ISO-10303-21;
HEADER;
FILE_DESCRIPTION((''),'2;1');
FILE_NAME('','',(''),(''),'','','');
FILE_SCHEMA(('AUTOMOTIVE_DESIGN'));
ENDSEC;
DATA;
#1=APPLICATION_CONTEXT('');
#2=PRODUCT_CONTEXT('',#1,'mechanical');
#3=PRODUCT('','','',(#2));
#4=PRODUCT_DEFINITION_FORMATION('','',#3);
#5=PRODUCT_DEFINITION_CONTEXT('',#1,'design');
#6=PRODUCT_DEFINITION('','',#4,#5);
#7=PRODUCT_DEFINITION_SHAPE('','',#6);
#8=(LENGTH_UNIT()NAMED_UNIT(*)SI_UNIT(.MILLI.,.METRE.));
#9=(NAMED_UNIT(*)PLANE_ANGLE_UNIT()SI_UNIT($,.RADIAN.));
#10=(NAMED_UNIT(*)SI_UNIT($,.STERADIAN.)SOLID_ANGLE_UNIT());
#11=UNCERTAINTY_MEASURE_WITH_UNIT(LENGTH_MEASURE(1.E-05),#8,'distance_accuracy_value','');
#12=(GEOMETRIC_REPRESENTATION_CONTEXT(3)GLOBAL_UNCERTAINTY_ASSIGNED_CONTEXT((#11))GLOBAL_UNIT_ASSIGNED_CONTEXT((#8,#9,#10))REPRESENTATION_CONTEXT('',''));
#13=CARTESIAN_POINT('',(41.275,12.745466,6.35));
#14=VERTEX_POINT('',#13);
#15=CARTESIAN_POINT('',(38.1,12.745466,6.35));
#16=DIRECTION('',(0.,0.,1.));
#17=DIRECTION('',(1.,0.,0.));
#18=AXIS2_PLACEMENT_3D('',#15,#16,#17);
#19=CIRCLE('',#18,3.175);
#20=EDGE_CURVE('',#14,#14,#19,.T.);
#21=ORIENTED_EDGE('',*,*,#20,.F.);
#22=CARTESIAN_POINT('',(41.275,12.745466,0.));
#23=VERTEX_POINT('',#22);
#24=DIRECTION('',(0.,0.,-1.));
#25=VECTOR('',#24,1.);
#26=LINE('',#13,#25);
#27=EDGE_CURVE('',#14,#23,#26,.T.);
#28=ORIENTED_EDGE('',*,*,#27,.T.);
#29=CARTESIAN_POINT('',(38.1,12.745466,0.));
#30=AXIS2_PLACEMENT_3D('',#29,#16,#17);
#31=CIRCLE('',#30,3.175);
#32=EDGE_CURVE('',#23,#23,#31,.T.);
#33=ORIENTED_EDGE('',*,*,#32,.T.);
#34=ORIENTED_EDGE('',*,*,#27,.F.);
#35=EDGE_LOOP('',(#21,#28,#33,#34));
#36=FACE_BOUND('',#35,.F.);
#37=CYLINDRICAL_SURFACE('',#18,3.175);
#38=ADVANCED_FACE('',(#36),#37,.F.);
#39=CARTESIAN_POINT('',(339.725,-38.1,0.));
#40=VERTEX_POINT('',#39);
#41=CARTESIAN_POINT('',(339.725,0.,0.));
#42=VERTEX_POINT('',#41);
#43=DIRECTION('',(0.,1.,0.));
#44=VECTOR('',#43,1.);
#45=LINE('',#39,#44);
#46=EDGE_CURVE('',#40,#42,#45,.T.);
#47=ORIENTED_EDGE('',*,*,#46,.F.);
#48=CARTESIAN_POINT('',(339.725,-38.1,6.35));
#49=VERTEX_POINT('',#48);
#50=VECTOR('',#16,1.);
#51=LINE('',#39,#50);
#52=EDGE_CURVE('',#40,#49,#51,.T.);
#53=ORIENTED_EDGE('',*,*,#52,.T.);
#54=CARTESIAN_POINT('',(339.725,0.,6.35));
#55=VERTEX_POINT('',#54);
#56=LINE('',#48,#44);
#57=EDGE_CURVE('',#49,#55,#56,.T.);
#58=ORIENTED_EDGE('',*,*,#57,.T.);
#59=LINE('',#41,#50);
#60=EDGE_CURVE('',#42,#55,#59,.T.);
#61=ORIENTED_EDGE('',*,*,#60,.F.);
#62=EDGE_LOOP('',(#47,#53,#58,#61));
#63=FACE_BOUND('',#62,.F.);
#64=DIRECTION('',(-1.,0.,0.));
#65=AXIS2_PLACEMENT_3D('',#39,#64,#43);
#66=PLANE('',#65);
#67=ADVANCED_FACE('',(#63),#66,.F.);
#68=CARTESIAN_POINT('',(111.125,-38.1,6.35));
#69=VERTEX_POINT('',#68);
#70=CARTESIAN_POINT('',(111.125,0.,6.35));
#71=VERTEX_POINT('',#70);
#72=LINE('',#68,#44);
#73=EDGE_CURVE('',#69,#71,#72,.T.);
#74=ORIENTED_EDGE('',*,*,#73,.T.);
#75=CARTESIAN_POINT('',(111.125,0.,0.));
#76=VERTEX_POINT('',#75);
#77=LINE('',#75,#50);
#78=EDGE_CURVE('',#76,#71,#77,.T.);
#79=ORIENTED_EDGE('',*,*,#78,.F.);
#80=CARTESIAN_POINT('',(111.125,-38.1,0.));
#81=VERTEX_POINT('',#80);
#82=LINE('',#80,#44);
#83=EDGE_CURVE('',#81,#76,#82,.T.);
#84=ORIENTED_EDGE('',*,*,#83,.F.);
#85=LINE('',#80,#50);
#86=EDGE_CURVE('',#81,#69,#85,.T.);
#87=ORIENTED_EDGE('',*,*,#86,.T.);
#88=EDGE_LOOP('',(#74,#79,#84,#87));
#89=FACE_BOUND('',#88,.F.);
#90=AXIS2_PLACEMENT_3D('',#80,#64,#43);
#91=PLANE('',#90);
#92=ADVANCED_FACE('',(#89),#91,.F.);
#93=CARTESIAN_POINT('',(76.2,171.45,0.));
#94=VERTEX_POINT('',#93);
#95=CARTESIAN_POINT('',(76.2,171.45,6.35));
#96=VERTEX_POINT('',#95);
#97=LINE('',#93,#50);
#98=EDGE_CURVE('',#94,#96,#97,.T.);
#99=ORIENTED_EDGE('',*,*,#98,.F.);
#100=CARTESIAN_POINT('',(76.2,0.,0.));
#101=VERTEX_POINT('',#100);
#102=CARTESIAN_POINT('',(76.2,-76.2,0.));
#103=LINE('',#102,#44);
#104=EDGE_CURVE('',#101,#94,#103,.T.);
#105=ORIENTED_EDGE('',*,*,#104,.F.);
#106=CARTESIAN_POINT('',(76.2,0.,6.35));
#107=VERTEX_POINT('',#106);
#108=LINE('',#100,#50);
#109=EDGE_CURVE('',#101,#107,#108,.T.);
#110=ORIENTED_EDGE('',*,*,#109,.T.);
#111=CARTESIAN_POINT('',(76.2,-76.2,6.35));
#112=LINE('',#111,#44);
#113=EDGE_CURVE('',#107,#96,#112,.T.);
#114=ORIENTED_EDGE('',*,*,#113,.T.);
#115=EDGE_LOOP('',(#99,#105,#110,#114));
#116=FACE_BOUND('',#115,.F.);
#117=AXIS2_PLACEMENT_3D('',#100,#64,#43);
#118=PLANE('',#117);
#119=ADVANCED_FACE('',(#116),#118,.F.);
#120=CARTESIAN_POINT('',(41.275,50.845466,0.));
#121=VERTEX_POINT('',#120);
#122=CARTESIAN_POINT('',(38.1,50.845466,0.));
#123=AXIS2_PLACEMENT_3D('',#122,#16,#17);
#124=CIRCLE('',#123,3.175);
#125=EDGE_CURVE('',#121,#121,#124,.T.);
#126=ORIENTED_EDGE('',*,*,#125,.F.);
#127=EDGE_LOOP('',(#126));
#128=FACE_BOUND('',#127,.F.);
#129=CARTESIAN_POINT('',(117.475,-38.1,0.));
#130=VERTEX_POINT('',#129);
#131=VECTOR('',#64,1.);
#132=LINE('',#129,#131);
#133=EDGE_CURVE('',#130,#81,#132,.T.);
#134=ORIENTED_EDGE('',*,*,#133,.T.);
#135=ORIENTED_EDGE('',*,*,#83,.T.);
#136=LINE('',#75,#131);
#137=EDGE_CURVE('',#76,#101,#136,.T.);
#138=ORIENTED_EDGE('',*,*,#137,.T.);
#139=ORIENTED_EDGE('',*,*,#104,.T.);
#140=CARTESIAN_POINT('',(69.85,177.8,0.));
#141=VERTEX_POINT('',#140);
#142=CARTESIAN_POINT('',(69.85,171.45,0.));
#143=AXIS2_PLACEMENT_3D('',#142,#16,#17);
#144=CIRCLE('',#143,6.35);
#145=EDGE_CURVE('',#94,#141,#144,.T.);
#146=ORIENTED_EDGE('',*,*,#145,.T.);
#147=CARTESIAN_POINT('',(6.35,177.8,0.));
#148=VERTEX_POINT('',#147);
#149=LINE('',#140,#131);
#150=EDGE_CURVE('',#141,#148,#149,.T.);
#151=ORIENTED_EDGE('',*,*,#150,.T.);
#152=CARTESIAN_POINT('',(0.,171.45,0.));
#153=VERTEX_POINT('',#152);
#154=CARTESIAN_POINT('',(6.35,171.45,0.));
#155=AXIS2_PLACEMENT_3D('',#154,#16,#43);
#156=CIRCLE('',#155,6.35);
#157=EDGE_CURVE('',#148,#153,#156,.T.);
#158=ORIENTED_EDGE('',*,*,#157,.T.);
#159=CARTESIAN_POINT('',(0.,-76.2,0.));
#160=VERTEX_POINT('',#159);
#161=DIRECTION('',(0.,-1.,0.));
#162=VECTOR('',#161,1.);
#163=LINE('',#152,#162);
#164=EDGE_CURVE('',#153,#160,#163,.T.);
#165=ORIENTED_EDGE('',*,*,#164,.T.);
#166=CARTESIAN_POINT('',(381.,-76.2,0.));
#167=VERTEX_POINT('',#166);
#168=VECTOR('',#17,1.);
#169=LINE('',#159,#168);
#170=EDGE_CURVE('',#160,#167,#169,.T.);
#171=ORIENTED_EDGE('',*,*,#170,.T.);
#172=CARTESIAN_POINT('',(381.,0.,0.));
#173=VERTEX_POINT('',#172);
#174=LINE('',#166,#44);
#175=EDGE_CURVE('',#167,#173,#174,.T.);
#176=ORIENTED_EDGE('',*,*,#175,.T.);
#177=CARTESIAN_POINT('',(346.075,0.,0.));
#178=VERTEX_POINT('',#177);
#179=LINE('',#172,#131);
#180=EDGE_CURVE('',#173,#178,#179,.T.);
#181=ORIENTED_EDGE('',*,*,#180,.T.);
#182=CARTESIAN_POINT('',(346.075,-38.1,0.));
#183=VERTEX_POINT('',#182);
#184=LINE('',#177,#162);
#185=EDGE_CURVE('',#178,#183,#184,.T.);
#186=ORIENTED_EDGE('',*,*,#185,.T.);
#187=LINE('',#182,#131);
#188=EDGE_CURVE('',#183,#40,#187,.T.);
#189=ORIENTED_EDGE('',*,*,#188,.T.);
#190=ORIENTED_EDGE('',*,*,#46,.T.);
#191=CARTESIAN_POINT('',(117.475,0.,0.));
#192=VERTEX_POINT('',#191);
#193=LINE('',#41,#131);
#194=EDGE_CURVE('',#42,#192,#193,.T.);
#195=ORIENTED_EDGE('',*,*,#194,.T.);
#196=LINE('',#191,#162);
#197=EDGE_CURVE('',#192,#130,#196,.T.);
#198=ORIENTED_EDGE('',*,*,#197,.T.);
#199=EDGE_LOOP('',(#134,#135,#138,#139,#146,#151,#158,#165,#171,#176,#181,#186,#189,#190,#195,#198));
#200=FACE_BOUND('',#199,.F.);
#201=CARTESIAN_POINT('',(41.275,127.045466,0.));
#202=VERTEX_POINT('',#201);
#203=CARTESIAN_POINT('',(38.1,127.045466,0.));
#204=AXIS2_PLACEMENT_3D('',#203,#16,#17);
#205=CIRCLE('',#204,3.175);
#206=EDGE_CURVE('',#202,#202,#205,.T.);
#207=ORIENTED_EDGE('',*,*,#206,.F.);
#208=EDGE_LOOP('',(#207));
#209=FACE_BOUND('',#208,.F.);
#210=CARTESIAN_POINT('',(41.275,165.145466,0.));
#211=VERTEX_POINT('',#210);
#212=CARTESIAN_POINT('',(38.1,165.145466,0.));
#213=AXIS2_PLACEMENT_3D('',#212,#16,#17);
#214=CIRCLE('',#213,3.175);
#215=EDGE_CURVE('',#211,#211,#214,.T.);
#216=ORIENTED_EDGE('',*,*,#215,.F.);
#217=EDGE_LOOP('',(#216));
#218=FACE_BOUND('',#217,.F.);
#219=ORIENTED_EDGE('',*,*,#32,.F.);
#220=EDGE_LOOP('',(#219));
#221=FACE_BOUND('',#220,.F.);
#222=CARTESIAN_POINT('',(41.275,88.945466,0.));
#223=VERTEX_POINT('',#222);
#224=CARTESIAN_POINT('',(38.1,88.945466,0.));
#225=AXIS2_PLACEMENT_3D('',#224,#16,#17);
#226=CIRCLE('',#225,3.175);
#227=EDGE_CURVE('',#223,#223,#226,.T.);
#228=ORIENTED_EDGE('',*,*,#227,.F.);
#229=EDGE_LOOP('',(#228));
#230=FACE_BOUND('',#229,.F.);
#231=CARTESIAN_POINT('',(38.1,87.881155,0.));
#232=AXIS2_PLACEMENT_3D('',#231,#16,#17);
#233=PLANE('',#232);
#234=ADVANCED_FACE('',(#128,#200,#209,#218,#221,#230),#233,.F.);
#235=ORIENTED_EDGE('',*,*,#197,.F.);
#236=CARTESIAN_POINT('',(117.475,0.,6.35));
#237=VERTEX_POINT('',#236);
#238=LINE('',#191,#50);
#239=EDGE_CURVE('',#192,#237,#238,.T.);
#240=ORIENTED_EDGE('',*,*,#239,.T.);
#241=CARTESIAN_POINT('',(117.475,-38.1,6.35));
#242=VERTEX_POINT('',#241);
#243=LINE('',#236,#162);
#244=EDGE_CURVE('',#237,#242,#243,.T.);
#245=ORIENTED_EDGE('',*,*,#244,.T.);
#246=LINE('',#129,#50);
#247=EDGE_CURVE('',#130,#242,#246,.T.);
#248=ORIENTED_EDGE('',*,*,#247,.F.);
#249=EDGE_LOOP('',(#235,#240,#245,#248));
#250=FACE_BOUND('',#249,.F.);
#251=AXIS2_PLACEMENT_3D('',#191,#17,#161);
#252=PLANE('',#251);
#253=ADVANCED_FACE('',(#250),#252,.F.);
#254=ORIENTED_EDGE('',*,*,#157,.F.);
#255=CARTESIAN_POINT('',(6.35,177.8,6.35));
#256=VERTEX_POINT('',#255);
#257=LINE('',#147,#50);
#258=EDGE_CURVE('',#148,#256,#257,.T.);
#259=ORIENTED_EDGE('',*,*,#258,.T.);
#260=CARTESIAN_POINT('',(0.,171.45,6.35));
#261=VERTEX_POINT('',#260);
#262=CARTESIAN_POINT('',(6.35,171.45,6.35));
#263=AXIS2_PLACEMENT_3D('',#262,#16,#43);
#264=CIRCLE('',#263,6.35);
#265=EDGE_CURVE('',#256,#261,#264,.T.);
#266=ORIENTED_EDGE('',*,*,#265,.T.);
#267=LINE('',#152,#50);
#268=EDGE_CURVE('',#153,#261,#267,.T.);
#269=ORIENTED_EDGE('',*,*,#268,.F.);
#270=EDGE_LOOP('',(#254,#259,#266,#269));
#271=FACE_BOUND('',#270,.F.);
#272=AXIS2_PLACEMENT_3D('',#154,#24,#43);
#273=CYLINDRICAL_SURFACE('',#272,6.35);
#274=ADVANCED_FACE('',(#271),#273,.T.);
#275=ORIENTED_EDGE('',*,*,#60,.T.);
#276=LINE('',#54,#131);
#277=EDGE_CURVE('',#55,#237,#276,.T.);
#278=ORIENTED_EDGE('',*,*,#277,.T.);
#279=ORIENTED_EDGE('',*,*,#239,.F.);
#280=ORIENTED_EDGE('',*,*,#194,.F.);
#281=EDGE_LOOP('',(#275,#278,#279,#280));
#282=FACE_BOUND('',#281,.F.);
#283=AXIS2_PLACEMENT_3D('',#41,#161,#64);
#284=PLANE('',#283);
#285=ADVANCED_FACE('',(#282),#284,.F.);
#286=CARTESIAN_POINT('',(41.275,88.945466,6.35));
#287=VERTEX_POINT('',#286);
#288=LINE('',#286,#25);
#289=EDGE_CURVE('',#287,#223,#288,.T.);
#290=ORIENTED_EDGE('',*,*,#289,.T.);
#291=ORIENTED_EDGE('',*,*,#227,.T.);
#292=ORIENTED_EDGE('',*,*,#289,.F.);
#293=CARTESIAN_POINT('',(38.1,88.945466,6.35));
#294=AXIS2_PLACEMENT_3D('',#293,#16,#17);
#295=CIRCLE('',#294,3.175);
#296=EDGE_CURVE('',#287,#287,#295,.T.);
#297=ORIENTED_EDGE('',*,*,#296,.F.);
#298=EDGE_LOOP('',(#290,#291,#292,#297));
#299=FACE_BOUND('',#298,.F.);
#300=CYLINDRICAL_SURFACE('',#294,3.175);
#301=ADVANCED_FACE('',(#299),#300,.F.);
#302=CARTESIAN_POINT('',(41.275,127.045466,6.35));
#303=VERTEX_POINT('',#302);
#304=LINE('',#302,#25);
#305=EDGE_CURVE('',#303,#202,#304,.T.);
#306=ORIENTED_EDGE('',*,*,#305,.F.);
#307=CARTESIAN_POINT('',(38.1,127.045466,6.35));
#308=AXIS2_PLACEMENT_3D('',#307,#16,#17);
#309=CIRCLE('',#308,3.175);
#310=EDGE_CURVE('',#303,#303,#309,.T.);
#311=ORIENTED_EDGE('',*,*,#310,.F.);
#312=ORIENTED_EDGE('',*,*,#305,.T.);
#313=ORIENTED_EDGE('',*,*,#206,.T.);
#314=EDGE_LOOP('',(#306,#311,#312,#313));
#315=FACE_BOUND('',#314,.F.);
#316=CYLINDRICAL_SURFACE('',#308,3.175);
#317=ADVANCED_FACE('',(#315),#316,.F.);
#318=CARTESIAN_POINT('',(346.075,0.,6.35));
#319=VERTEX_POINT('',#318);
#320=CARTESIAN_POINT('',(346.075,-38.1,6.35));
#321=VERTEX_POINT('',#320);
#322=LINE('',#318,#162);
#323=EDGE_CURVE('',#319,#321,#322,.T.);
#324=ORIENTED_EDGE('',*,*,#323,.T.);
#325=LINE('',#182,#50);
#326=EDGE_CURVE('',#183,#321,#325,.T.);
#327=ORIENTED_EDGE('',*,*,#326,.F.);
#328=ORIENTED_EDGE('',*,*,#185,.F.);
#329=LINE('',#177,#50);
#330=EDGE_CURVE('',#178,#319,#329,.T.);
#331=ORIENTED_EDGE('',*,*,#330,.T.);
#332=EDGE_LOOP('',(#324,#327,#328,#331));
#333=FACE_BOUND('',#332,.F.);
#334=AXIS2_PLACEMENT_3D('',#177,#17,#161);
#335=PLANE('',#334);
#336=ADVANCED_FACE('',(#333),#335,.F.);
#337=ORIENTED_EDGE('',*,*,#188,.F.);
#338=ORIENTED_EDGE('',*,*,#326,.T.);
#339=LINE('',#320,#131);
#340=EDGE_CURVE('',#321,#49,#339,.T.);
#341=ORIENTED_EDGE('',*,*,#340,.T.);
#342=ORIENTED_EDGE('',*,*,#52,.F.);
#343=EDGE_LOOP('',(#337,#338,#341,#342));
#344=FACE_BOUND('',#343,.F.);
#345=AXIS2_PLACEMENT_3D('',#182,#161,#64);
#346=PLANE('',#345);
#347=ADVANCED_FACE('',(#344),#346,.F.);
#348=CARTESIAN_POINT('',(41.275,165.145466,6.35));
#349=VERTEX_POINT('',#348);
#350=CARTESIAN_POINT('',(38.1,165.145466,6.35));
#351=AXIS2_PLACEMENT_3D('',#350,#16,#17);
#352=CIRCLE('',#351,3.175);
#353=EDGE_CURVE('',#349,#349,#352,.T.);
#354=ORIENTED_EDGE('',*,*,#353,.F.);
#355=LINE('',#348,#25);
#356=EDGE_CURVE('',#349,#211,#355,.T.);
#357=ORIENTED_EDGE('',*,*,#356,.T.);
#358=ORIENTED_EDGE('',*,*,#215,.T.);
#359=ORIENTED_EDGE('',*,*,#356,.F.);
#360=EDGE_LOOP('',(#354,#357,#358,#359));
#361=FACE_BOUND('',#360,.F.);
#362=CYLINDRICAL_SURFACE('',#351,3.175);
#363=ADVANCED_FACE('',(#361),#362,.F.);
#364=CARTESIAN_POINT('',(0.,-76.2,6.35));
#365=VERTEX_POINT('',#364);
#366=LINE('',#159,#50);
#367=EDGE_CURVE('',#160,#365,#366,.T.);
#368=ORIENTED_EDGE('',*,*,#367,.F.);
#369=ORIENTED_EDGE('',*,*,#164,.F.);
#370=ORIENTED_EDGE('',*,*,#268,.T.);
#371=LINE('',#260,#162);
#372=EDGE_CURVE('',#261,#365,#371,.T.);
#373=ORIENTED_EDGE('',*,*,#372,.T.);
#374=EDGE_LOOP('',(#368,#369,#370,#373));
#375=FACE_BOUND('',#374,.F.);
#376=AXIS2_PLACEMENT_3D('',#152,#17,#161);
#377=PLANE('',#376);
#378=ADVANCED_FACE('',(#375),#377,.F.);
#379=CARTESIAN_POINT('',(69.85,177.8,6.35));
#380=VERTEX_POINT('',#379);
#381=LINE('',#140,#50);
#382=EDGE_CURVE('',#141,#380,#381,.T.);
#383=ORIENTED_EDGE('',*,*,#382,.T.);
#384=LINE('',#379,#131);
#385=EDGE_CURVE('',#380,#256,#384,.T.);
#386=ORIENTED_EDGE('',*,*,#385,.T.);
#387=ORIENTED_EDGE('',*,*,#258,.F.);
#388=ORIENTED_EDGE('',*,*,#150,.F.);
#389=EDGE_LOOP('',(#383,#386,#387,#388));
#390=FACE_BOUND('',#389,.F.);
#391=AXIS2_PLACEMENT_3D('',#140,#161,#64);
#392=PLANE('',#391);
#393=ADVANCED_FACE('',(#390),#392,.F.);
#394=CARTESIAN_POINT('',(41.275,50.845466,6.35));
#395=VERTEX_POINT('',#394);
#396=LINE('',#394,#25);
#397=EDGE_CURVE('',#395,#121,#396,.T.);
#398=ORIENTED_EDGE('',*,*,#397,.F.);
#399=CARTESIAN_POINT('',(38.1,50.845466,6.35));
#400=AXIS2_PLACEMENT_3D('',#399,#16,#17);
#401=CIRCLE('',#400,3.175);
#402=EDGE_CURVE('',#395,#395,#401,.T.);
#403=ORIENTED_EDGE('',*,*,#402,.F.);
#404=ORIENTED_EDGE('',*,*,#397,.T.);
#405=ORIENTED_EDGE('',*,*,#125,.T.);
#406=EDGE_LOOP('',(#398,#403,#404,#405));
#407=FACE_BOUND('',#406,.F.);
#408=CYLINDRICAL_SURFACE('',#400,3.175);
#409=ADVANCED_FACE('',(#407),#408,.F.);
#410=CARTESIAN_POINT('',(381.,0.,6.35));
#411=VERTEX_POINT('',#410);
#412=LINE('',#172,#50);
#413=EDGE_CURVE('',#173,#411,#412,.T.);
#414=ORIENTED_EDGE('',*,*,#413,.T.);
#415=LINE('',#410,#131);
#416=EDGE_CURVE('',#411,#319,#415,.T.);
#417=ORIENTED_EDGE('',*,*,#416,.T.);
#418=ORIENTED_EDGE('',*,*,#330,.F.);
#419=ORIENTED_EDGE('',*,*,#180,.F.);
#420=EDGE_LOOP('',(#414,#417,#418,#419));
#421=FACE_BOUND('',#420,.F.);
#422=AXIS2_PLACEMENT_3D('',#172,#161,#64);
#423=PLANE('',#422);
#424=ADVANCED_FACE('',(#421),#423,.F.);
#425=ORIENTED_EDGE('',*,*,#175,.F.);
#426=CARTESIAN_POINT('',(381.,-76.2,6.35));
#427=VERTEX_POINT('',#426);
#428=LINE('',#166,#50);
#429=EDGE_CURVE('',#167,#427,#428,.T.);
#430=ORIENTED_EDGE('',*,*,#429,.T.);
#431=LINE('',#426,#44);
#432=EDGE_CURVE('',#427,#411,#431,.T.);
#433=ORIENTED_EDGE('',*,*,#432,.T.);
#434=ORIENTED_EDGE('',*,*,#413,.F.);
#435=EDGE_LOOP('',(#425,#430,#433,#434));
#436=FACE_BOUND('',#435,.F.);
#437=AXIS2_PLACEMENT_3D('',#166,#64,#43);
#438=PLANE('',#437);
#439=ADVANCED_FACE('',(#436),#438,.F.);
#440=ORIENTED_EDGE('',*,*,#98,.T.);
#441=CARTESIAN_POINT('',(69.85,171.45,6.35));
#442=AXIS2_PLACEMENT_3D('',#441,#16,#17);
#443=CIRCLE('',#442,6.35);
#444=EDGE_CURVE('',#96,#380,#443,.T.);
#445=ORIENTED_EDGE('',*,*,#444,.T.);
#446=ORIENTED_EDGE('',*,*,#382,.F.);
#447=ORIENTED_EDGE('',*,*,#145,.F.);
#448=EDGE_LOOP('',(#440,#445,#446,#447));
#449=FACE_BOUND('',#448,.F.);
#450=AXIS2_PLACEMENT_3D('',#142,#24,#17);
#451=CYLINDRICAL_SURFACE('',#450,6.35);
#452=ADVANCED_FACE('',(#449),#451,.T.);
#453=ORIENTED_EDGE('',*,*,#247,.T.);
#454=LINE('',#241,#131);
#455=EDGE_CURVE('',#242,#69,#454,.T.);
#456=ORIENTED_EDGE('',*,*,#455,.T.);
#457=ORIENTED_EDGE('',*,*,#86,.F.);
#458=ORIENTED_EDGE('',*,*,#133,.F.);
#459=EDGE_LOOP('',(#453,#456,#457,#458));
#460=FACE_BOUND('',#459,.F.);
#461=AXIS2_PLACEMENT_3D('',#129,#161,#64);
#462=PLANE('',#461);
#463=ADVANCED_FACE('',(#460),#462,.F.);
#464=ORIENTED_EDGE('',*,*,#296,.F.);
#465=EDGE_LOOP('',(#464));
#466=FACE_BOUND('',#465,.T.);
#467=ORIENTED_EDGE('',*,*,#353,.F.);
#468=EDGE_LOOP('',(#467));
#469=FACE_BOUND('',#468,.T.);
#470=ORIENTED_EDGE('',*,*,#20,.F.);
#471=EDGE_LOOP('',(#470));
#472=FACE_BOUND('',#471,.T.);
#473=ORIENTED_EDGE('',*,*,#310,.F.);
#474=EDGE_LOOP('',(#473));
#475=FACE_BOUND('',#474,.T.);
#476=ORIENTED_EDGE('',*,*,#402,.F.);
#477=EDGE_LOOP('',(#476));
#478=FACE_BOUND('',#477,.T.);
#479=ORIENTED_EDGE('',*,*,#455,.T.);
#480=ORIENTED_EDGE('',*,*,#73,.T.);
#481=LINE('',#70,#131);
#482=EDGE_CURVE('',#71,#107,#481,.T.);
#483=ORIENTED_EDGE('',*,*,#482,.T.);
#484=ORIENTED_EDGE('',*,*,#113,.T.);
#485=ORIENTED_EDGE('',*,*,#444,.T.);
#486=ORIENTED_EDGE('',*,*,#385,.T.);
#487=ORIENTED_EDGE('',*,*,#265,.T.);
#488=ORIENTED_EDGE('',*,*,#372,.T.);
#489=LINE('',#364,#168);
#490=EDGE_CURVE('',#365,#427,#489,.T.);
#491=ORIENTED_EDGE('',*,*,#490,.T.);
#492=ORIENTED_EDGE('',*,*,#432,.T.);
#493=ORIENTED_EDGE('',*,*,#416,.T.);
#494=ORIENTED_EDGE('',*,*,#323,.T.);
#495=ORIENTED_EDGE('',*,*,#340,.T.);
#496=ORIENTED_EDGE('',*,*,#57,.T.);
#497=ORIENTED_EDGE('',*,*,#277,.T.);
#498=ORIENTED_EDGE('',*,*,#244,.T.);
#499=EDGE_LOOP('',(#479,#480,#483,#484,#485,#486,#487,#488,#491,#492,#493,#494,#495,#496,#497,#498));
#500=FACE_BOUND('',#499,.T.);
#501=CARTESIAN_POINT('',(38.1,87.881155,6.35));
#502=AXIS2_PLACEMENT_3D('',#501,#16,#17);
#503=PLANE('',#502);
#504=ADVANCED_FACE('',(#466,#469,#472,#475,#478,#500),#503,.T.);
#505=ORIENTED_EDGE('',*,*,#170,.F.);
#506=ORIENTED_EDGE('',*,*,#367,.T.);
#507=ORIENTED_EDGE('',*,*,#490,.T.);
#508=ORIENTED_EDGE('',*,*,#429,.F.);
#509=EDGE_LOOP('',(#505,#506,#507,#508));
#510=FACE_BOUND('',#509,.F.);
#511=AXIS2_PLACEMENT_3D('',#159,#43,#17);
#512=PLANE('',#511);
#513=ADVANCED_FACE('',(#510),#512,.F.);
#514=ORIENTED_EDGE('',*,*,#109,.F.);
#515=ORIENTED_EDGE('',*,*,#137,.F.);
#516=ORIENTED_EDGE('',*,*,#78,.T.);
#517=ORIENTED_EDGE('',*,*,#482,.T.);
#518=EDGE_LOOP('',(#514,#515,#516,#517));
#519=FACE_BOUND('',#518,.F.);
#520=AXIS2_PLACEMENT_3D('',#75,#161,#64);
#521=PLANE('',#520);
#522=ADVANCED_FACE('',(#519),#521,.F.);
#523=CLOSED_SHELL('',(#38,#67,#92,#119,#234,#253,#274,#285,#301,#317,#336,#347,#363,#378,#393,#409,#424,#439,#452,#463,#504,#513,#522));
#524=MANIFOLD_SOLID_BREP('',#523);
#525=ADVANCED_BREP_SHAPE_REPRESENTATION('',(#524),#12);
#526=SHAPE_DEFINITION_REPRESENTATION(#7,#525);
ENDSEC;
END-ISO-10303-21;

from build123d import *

# Parameters (mm, degrees)
F0_W     = 76.2
F0_H     = 76.2
F1_DEPTH = 6.35
F2_R     = 3.175
F3_DEPTH = 25.4


# Not quite as in the source:
# - a feature names something its author has since deleted; it is built from what else it names


with BuildPart() as f1:
    # F0 (on Top) → F1 (new body)
    with BuildSketch(Plane.XY):
        with BuildLine():
            Line((0, 0), (76.2, 0))
            Line((76.2, 0), (76.2, 171.45))
            ThreePointArc((76.2, 171.45), (74.3401280605, 175.9401280605), (69.85, 177.8))
            Line((69.85, 177.8), (6.35, 177.8))
            ThreePointArc((6.35, 177.8), (1.8598719395, 175.9401280605), (0, 171.45))
            Line((0, 171.45), (0, 0))
        make_face()
        with Locations((38.1, -38.1)):
            Rectangle(F0_W, F0_H)
        Polygon((111.125, -38.1), (111.125, 0), (76.2, 0), (76.2, -76.2), (250.825, -76.2), (257.175, -76.2), (381, -76.2), (381, 0), (346.075, 0), (346.075, -38.1), (342.9, -38.1), (339.725, -38.1), (339.725, 0), (257.175, 0), (250.825, 0), (117.475, 0), (117.475, -38.1), (114.3, -38.1), align=None)
    extrude(amount=F1_DEPTH)

    # F2 (on face) → F3 (cut)
    with BuildSketch(Plane.XY.offset(6.35)):
        with Locations((38.1, 12.7454660833)):
            Circle(F2_R)
        with Locations((38.1, 50.8454660833)):
            Circle(F2_R)
        with Locations((38.1, 88.9454660833)):
            Circle(F2_R)
        with Locations((38.1, 127.0454660833)):
            Circle(F2_R)
        with Locations((38.1, 165.1454660833)):
            Circle(F2_R)
    extrude(amount=-F3_DEPTH, mode=Mode.SUBTRACT)


solid = f1.part
